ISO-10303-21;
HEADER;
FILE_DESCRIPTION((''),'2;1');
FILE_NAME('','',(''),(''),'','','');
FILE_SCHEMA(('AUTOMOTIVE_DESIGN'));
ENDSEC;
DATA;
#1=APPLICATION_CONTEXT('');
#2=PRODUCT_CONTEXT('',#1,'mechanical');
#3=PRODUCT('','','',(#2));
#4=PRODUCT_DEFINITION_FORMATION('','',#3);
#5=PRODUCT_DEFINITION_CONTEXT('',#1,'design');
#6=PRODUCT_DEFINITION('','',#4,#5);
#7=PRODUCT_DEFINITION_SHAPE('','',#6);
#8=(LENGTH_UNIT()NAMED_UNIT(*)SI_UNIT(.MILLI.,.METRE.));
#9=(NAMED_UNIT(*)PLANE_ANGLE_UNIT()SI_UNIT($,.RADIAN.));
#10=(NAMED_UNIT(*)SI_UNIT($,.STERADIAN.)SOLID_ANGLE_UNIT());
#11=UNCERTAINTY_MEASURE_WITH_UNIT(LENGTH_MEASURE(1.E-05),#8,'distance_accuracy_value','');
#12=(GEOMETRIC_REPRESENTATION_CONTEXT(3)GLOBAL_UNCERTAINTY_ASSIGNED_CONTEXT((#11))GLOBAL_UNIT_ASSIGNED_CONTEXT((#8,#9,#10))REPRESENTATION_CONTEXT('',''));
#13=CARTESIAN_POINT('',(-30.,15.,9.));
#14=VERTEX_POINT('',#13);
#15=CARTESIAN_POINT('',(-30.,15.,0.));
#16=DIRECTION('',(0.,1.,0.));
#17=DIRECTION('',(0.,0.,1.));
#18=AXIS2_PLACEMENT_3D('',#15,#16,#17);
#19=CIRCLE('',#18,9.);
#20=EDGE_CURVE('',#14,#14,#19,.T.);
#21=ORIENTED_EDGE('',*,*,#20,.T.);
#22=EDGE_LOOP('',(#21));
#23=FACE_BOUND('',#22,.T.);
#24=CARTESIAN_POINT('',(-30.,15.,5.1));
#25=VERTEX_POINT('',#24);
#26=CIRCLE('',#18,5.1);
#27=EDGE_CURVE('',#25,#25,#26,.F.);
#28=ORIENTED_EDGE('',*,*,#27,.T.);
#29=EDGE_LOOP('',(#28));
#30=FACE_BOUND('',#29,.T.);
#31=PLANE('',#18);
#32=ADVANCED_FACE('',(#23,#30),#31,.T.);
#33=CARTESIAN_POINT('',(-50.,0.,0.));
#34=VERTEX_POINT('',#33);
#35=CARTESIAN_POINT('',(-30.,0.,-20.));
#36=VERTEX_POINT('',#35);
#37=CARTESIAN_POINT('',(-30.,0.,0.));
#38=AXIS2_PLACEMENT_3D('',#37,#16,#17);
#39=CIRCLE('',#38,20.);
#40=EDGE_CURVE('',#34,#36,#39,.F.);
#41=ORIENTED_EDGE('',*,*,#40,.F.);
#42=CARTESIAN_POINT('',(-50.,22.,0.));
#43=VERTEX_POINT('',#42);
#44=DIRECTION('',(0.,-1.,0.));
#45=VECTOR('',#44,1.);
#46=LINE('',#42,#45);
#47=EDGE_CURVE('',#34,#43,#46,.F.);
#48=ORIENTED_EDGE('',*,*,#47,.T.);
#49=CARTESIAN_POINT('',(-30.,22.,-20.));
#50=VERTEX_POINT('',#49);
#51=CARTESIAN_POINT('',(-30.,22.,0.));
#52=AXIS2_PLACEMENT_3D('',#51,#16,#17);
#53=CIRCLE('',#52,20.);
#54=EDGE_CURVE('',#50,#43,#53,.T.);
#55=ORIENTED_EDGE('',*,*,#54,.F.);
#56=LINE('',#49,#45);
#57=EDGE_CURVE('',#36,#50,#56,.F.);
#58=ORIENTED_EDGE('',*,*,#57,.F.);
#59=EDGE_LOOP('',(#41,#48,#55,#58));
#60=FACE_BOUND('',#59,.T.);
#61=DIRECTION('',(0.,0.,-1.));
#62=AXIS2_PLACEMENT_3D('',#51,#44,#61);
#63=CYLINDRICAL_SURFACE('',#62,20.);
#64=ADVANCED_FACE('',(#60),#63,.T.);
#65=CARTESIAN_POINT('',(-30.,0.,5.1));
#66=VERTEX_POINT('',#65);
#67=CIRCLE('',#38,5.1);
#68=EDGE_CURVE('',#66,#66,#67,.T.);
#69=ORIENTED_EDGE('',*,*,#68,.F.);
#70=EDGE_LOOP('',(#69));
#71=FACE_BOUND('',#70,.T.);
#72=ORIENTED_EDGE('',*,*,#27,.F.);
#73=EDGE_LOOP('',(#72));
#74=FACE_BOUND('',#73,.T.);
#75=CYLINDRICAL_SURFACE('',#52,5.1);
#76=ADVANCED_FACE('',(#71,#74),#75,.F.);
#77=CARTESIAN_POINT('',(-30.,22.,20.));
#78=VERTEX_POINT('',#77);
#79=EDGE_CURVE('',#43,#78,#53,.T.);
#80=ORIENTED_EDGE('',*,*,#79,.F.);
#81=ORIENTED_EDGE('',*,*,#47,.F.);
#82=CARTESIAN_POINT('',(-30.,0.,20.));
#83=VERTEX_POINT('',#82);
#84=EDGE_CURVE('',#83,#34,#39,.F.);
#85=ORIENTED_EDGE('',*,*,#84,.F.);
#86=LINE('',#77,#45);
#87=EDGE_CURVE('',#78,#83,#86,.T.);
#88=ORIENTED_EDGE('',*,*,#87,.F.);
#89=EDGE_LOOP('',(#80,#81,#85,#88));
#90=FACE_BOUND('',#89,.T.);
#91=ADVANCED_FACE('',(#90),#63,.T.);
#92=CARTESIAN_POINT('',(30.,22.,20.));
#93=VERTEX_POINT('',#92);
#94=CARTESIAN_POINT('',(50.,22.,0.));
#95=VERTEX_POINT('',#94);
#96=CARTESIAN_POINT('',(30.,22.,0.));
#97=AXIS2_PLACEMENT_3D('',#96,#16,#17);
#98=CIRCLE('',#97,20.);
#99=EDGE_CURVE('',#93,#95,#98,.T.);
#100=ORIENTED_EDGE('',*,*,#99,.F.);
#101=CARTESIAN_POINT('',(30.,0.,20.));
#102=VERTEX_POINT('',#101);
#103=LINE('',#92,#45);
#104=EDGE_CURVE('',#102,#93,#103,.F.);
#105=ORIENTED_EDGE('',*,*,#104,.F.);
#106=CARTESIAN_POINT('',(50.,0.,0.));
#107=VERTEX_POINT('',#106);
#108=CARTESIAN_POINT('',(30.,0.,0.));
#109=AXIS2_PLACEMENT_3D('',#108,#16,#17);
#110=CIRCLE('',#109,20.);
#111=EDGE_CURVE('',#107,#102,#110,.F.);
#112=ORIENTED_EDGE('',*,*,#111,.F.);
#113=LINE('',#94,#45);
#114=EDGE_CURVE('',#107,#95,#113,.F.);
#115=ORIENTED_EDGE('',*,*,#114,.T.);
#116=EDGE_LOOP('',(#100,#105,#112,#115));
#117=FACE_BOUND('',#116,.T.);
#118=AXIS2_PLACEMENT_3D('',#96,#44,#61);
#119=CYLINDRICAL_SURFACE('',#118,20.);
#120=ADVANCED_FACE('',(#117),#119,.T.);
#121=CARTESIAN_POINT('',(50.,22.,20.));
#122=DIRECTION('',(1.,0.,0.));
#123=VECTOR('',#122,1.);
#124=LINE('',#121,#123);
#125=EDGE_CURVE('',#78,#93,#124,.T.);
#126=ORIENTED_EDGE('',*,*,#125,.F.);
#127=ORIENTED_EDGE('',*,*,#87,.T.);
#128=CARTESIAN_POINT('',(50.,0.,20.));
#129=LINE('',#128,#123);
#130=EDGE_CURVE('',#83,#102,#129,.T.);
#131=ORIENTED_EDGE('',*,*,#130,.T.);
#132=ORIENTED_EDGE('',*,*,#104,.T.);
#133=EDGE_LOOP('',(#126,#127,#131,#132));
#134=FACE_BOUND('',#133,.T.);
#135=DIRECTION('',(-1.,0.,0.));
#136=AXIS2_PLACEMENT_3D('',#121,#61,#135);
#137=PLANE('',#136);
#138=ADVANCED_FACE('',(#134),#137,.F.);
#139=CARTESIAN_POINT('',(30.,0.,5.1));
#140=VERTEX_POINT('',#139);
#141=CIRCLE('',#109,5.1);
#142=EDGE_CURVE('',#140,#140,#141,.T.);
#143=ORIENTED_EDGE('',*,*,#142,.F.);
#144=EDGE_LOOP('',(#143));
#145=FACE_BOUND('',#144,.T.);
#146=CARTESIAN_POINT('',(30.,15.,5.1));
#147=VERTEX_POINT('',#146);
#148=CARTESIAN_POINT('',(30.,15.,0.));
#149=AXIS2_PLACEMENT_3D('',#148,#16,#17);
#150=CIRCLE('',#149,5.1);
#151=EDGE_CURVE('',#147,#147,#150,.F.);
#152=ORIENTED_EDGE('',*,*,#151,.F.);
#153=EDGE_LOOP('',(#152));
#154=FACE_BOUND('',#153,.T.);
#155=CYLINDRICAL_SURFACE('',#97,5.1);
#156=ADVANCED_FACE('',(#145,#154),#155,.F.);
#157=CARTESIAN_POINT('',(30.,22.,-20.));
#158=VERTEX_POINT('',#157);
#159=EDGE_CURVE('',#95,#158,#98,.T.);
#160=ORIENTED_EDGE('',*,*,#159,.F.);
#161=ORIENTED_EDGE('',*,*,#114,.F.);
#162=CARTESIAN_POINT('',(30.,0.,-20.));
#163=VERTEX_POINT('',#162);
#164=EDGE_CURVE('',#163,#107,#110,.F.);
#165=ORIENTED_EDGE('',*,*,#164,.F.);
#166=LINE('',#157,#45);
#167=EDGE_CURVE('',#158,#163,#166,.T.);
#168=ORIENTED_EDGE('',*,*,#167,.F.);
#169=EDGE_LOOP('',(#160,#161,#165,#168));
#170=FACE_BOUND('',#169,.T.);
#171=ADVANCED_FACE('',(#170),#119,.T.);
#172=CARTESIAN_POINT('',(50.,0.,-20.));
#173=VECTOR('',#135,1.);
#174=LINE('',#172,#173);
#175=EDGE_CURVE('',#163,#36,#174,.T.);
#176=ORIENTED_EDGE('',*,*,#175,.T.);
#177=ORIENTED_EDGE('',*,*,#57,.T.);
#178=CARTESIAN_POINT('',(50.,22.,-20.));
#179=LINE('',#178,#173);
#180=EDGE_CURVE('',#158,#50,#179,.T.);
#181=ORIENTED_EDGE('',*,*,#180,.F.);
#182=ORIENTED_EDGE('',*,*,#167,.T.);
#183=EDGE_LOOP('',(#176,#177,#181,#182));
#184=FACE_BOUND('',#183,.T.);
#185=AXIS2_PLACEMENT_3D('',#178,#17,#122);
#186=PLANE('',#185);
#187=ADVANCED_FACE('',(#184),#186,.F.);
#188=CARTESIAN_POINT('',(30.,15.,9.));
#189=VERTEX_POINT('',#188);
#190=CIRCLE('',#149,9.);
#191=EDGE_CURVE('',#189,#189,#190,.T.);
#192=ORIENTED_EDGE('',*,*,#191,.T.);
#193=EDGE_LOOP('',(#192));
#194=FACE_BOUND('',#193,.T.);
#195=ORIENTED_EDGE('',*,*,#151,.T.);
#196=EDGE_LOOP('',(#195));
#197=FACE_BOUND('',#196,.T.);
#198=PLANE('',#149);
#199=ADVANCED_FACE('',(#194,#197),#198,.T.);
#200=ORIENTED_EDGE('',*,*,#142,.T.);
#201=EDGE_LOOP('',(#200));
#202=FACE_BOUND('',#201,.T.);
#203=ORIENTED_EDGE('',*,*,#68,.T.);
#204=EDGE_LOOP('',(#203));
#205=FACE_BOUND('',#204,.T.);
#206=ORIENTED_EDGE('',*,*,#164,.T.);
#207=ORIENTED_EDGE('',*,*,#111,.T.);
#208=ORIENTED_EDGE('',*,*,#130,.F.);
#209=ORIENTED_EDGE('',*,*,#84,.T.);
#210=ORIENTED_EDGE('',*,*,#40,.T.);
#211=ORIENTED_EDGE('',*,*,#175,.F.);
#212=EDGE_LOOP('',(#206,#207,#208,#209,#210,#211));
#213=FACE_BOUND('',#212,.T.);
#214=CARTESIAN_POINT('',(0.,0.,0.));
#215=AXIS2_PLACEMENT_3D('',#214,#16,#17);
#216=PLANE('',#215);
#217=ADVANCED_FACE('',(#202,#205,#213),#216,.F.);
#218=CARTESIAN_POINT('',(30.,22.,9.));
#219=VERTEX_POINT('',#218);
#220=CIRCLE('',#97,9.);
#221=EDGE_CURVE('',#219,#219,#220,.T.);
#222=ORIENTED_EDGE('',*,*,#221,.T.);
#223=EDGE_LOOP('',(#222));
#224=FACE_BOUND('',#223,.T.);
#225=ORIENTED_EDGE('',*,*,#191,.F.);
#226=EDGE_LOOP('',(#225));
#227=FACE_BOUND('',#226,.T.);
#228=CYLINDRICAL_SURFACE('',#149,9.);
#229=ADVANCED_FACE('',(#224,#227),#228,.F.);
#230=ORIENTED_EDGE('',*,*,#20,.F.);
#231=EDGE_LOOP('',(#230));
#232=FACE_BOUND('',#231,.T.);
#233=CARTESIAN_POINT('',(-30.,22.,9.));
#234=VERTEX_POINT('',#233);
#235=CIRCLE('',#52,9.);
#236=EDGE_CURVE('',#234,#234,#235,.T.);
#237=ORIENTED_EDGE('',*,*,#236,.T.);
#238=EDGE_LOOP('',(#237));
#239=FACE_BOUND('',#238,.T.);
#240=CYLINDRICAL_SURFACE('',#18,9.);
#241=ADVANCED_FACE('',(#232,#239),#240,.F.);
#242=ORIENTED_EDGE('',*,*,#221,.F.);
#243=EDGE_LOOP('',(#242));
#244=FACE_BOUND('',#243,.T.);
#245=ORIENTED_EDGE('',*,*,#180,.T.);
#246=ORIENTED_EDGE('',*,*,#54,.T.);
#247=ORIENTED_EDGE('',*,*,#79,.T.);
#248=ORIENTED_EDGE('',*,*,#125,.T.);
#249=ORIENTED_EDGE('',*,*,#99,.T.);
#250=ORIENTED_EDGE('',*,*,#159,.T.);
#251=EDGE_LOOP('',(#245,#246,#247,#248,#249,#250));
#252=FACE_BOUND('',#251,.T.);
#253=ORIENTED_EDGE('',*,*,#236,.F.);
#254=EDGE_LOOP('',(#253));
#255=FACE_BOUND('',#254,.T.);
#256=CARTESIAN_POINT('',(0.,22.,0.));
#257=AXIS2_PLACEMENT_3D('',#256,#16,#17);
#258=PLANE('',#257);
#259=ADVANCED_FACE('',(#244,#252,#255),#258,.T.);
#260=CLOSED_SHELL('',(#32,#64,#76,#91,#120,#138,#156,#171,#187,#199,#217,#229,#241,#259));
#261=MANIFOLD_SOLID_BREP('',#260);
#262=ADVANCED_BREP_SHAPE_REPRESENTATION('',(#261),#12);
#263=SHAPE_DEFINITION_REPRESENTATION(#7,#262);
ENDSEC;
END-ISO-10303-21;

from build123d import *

# Parameters (mm, degrees)
SKETCH_1_W             = 100
SKETCH_1_H             = 40
EXTRUDE_1_DEPTH        = 22
HOLE_WIZARD_M121_D     = 10.2
HOLE_WIZARD_M121_DEPTH = 26.75
HOLE_WIZARD_M121_TIP   = 3.064389157
SKETCH_5_R             = 9
CUT_EXTRUDE_1_DEPTH    = 7
FILLET_1_R             = 20


with BuildPart() as part:
    # Эскиз1 → Бобышка-Вытянуть1 (new body)
    with BuildSketch(Plane(origin=(0, 0, 0), x_dir=(1, 0, 0), z_dir=(0, 1, 0))):
        Rectangle(SKETCH_1_W, SKETCH_1_H)
    extrude(amount=EXTRUDE_1_DEPTH)

    # Отверстие обработанное метчиком M121
    with Locations(Plane(origin=(-30, 22, 0), x_dir=(0, 0, 1), z_dir=(0, 1, 0))):
        with Locations((0, 0), (0, 60)):
            Hole(HOLE_WIZARD_M121_D / 2, depth=HOLE_WIZARD_M121_DEPTH)
            with Locations((0, 0, -(HOLE_WIZARD_M121_DEPTH + HOLE_WIZARD_M121_TIP / 2))):  # 118° drill point
                Cone(0, HOLE_WIZARD_M121_D / 2, HOLE_WIZARD_M121_TIP, mode=Mode.SUBTRACT)

    # Эскиз5 → Вырез-Вытянуть1 (cut)
    with BuildSketch(Plane(origin=(0, 22, 0), x_dir=(1, 0, 0), z_dir=(0, 1, 0))):
        with Locations(Location((30, 0, 0), (0, 0, 270))):
            Circle(SKETCH_5_R)
        with Locations(Location((-30, 0, 0), (0, 0, 270))):
            Circle(SKETCH_5_R)
    extrude(amount=-CUT_EXTRUDE_1_DEPTH, mode=Mode.SUBTRACT)

    # Скругление1
    fillet_1_edges = [part.edges().sort_by_distance(p)[0] for p in [
        (50, 11, 20),
        (50, 11, -20),
        (-50, 11, -20),
        (-50, 11, 20),
    ]]
    fillet(fillet_1_edges, radius=FILLET_1_R - 0.0001)  # a hair under: the kernel refuses the full size


solid = part.part
